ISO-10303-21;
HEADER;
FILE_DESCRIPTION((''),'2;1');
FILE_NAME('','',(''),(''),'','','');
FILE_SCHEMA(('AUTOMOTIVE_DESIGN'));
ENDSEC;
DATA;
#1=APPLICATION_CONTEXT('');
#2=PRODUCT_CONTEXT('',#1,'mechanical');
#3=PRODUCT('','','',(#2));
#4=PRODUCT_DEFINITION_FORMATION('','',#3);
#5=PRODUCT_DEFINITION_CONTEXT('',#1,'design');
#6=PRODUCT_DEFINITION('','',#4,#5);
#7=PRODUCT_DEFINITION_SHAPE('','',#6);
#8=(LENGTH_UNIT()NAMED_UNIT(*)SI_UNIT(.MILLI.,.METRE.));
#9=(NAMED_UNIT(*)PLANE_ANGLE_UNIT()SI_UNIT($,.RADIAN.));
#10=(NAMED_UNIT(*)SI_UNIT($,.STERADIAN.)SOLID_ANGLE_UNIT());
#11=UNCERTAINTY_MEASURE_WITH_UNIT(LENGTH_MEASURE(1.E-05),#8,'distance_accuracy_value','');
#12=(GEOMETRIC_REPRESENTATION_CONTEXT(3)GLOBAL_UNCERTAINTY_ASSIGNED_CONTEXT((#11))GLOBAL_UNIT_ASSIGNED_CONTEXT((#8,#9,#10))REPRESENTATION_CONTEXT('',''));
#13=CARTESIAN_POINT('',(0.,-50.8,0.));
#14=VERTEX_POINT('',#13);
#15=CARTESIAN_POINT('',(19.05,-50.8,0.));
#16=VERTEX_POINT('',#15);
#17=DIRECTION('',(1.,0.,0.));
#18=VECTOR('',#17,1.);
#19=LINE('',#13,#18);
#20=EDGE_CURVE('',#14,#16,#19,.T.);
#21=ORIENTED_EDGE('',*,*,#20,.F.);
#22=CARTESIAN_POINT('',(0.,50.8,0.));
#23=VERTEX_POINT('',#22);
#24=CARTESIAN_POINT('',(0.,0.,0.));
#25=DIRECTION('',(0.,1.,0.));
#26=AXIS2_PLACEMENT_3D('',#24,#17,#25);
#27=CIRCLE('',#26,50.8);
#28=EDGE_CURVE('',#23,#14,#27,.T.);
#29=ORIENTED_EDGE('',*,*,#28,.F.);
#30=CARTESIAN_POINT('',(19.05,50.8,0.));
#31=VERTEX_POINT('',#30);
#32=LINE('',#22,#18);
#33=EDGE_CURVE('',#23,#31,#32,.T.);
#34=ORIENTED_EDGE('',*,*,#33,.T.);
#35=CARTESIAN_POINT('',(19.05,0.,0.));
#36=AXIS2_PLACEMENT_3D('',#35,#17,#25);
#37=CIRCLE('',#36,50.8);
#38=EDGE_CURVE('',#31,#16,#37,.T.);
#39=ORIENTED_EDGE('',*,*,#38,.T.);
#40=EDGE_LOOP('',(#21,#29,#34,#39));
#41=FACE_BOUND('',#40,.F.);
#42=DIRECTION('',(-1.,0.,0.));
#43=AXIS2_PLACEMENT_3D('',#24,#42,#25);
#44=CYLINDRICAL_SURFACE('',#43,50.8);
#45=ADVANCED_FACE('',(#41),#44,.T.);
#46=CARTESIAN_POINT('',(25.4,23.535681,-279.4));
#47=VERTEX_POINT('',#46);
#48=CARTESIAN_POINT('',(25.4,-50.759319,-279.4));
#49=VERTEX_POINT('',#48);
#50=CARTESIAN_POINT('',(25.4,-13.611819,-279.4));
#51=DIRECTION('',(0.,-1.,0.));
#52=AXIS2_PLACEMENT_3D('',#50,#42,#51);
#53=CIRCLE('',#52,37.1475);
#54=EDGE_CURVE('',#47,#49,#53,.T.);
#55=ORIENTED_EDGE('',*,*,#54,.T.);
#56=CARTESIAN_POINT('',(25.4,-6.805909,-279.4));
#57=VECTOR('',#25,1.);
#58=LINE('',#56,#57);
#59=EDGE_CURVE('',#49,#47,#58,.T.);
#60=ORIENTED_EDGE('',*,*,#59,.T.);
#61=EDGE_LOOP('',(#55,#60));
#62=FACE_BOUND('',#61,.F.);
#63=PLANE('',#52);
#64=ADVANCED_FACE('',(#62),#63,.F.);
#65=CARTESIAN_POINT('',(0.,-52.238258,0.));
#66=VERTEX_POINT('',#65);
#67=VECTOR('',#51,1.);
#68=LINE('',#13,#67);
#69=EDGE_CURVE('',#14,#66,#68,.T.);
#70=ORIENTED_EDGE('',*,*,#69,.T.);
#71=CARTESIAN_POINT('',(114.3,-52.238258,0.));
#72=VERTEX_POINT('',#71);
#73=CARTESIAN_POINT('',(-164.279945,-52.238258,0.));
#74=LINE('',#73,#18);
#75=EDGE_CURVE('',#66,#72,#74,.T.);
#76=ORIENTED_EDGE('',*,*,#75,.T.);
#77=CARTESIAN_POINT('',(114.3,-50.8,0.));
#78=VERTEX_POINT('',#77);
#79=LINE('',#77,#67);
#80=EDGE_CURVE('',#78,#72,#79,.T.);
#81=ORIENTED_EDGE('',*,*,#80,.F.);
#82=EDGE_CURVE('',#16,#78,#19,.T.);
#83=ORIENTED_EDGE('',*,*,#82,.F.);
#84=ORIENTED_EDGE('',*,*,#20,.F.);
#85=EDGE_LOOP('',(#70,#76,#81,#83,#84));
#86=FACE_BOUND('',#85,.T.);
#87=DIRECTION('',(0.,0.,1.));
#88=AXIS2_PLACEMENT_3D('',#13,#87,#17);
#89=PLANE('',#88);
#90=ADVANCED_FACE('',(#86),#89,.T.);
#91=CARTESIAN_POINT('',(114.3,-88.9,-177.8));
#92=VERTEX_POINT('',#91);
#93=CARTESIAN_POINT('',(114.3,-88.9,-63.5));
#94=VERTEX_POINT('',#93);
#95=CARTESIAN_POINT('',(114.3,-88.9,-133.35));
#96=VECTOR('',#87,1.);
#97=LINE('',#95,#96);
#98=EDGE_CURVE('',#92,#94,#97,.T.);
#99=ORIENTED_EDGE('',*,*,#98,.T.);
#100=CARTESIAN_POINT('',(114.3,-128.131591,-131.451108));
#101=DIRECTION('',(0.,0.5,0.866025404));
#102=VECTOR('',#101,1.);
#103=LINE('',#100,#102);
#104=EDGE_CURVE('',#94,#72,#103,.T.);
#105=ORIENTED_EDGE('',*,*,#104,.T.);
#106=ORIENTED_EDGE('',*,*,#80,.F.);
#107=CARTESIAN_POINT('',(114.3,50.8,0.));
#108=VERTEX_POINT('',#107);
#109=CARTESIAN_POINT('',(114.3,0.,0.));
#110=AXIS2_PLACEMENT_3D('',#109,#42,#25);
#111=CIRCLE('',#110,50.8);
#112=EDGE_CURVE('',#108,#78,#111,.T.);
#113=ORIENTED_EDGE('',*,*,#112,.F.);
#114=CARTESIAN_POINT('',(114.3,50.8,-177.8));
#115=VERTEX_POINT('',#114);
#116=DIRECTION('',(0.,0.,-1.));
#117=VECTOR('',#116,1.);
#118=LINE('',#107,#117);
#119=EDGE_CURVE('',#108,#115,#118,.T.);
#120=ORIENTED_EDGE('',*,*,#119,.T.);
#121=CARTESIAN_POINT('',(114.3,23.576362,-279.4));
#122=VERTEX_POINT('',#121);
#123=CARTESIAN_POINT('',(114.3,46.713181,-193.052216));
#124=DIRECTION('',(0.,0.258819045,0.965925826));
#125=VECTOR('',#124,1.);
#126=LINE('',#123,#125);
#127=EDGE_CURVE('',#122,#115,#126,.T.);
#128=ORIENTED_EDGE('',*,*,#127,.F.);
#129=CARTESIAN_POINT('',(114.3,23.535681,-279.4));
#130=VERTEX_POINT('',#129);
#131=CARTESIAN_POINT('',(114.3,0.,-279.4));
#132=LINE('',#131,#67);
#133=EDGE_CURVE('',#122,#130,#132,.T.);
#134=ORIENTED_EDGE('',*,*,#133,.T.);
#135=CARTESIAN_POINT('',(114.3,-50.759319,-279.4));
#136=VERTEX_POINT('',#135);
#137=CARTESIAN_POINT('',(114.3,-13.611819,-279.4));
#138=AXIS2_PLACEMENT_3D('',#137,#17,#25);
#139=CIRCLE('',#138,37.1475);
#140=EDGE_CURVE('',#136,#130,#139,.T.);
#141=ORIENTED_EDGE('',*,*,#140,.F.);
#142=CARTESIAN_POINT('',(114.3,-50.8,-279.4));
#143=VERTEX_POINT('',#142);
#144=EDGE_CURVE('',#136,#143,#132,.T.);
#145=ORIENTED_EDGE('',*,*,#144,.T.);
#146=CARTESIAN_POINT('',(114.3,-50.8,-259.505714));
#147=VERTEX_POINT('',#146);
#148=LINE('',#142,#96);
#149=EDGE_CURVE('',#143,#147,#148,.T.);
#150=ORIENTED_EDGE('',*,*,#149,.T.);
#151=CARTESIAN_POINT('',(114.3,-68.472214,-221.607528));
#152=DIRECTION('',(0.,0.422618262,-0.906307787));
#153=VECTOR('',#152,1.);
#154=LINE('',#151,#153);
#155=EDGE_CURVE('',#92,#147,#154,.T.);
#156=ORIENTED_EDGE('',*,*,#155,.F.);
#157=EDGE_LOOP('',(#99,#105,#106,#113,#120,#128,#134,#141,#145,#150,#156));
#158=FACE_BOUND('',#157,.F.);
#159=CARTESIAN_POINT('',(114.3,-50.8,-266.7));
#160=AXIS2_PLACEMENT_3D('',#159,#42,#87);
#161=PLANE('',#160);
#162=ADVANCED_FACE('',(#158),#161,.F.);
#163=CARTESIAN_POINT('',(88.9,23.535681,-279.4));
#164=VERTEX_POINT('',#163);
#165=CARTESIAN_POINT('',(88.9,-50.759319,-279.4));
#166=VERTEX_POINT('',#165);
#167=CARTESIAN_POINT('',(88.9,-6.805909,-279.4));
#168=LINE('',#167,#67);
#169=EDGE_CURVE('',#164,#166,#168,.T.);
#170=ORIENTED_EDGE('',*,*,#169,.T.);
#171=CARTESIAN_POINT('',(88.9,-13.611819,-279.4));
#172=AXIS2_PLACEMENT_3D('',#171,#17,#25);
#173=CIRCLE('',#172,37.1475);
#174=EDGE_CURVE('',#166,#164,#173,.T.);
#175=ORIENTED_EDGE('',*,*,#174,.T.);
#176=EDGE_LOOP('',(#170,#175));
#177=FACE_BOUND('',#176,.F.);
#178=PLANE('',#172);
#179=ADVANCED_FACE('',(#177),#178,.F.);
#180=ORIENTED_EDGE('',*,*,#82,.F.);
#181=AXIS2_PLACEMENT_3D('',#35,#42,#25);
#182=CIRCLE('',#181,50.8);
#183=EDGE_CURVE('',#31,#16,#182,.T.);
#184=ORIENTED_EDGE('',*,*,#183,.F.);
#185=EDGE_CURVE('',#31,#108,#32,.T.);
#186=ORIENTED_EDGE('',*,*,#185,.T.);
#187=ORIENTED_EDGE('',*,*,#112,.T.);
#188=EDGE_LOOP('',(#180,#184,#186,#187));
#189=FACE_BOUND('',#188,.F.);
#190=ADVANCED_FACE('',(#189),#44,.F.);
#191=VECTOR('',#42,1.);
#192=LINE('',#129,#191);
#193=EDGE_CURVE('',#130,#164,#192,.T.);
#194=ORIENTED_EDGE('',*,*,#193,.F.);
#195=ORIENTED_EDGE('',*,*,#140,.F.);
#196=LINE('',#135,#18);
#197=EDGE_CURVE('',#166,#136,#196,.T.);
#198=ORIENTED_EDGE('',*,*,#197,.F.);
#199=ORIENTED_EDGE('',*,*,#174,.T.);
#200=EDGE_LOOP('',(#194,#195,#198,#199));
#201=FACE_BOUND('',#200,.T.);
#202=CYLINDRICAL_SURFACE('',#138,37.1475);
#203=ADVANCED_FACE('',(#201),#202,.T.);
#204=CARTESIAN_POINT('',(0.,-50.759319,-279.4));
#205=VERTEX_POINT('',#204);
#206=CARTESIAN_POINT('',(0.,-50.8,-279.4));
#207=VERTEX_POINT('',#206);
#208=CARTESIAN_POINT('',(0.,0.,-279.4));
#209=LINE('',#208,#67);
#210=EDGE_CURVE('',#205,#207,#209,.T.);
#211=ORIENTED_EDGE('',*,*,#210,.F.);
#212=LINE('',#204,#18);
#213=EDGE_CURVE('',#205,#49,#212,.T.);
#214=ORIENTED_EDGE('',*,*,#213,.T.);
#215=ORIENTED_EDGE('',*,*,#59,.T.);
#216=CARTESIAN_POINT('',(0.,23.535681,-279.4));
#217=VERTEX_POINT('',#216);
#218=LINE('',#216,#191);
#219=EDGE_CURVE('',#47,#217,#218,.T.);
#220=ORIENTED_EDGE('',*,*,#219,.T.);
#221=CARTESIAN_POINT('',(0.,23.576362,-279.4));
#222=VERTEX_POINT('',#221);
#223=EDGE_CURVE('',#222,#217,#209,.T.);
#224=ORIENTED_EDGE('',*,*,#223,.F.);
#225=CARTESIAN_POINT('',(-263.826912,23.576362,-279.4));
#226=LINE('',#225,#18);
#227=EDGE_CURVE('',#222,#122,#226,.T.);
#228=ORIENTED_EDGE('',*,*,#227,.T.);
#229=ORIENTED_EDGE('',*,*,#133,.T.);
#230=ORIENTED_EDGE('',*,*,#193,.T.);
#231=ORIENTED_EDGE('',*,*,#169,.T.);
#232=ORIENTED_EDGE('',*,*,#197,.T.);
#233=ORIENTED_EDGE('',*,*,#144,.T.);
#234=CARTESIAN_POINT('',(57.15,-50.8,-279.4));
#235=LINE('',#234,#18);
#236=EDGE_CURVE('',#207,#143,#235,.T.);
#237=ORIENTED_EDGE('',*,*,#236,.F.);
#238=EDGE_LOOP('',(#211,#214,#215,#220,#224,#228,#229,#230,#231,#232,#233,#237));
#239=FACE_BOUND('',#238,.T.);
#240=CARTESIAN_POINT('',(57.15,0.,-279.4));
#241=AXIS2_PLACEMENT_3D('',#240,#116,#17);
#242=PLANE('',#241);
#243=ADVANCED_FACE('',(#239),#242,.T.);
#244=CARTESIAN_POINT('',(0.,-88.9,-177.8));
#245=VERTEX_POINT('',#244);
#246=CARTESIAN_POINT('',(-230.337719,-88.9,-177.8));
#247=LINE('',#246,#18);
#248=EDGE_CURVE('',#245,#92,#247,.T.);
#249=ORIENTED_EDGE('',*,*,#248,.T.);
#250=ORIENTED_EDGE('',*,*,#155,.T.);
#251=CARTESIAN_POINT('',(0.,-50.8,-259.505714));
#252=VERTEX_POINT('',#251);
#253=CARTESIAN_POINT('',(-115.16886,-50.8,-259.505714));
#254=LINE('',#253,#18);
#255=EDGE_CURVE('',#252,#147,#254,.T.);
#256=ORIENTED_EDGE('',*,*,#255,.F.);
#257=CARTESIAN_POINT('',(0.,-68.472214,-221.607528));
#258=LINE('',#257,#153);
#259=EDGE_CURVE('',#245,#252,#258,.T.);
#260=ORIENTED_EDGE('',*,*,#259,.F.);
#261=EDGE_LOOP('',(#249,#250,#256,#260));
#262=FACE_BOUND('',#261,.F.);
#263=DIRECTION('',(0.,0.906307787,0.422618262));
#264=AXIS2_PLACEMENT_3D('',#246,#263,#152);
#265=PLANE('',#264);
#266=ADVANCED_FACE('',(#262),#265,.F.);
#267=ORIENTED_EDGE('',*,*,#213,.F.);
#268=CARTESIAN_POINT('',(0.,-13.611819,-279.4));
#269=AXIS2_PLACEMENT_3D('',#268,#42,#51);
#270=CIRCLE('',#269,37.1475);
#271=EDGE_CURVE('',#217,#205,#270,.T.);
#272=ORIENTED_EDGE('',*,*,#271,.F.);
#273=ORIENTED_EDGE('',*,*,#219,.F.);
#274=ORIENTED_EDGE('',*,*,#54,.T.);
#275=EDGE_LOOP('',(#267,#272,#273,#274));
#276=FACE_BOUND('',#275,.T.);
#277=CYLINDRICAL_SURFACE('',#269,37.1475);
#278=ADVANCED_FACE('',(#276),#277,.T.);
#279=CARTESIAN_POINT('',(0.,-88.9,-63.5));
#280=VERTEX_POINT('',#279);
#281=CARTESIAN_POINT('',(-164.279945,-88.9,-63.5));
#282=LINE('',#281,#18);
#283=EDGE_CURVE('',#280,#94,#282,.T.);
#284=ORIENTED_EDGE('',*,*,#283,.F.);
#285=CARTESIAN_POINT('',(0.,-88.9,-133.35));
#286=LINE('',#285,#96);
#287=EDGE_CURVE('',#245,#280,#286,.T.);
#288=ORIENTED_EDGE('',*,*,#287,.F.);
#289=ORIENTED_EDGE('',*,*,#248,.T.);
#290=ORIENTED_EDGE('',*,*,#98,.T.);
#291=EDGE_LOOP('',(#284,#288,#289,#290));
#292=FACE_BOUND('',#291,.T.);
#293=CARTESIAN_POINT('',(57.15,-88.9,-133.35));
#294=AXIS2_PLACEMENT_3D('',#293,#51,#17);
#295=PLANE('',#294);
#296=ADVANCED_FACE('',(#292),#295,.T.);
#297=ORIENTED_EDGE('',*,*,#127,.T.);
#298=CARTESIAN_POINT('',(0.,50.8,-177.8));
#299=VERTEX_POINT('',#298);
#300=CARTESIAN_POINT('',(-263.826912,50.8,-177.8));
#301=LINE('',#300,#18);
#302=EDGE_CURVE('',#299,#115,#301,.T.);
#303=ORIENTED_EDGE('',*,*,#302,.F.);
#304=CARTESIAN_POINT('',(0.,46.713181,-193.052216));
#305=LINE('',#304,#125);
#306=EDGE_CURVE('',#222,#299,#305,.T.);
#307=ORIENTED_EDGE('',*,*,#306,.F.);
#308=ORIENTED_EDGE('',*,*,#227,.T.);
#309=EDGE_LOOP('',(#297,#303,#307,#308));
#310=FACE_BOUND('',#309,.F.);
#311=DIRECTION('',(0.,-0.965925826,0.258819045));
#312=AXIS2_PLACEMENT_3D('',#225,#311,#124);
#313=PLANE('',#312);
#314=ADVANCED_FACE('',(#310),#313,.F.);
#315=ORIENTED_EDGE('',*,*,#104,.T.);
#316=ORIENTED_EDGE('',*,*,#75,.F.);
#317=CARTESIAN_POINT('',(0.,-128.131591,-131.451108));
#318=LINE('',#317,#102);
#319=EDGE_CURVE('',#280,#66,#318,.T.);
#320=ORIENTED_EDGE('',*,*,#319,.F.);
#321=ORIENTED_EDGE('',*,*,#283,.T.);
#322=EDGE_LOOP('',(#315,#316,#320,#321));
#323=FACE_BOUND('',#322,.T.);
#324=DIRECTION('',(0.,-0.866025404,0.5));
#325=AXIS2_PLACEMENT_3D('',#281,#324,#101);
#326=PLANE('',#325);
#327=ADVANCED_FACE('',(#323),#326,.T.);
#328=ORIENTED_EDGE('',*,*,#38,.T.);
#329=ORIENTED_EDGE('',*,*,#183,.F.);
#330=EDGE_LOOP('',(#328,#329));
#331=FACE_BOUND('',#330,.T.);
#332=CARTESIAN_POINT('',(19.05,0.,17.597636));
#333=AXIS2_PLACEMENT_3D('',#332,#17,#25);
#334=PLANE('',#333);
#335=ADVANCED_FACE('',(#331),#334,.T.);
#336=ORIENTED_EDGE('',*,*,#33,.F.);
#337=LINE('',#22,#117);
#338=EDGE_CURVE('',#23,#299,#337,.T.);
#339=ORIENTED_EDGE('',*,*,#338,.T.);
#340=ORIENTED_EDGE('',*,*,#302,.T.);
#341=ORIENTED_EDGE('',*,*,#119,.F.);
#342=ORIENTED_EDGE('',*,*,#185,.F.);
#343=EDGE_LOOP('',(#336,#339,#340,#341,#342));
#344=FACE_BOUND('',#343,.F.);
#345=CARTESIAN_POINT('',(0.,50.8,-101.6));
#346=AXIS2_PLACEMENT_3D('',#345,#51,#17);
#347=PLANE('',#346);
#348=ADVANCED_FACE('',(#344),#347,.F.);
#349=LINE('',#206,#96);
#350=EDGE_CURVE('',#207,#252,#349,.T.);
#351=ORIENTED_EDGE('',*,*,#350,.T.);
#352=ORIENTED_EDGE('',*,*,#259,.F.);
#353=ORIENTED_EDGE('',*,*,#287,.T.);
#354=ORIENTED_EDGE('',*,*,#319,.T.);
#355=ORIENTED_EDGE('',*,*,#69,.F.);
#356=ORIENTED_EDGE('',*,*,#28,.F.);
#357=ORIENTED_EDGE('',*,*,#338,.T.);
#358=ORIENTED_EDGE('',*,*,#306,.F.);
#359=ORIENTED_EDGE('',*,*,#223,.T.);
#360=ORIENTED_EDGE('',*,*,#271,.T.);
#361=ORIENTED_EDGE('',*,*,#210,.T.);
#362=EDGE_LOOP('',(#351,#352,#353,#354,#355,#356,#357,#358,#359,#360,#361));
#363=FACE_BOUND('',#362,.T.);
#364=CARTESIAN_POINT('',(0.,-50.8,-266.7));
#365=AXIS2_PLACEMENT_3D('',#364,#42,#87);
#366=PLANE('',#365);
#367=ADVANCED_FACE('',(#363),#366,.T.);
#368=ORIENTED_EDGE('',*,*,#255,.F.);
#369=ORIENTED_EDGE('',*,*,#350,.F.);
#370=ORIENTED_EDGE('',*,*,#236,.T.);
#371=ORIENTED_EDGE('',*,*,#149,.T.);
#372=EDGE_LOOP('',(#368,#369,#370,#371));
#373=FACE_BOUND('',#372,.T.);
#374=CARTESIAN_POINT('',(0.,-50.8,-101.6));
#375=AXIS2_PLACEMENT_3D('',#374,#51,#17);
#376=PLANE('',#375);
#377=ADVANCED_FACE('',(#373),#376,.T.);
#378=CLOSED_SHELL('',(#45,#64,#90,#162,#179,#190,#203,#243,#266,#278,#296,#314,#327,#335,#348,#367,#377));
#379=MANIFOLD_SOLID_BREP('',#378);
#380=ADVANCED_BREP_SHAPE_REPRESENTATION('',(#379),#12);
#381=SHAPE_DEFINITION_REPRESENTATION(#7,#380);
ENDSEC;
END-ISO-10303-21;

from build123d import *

# Parameters (mm, degrees)
F1_DEPTH     = 19.05
F2_DEPTH     = 114.3
F3_W         = 114.3
F3_H         = 101.6
F4_DEPTH     = 177.8
F5_T1_DEPTH  = 641.9538230647
F6_R         = 37.1475
F7_DEPTH     = 25.4
F8_R         = 37.1475
F9_DEPTH     = 25.4
F10_W        = 114.3
F10_H        = 266.7
F11_DEPTH    = 38.1
F12_T4_DEPTH = 574.9754388191
F13_T1_DEPTH = 442.85989084


# Not quite as in the source:
# - a fillet or chamfer that OpenCascade refuses, or shapes differently, is made with other operations: its cross-section is extruded or revolved along the edge and cut away or added


with BuildPart() as f1:
    # F0 (on Right) → F1 (new body)
    with BuildSketch(Plane.YZ):
        with BuildLine():
            Line((-50.8, 0), (50.8, 0))
            ThreePointArc((50.8, 0), (0, 50.8), (-50.8, 0))
        make_face()
        with BuildLine():
            Line((50.8, -101.6), (50.8, 0))
            ThreePointArc((50.8, 0), (0, -50.8), (-50.8, 0))
            Line((-50.8, 0), (-50.8, -101.6))
            Line((-50.8, -101.6), (50.8, -101.6))
        make_face()
        with BuildLine():
            ThreePointArc((-50.8, 0), (0, -50.8), (50.8, 0))
            Line((50.8, 0), (-50.8, 0))
        make_face()
    extrude(amount=F1_DEPTH)

    # F0 (on Right) → F2 (join)
    with BuildSketch(Plane.YZ):
        with BuildLine():
            Line((50.8, -101.6), (50.8, 0))
            ThreePointArc((50.8, 0), (0, -50.8), (-50.8, 0))
            Line((-50.8, 0), (-50.8, -101.6))
            Line((-50.8, -101.6), (50.8, -101.6))
        make_face()
    extrude(amount=F2_DEPTH)

    # F3 (on face) → F4 (join)
    with BuildSketch(Plane(origin=(0, 0, -101.6), x_dir=(1, 0, 0), z_dir=(0, 0, -1))):
        with Locations((57.15, 0)):
            Rectangle(F3_W, F3_H)
    extrude(amount=F4_DEPTH)

    # F5: chamfer of 101.6 x 27.223637951 on 1 edges, made by hand

    # F5_s2 → F5_t1 (cut)
    with BuildSketch(Plane.YZ.offset(-263.8269115324)):
        Polygon((23.576362049, -279.4), (50.8, -177.8), (50.8, -279.4), align=None)
    extrude(amount=F5_T1_DEPTH, mode=Mode.SUBTRACT)

    # F6 (on face) → F7 (join)
    with BuildSketch(Plane(origin=(0, 0, 0), x_dir=(0, -1, 0), z_dir=(-1, 0, 0))):
        with Locations((13.6118189755, -279.4)):
            Circle(F6_R)
    extrude(amount=-F7_DEPTH)

    # F8 (on face) → F9 (join)
    with BuildSketch(Plane.YZ.offset(114.3)):
        with Locations((-13.6118189755, -279.4)):
            Circle(F8_R)
    extrude(amount=-F9_DEPTH)

    # F10 (on face) → F11 (join)
    with BuildSketch(Plane.XZ.offset(50.8)):
        with Locations((57.15, -133.35)):
            Rectangle(F10_W, F10_H)
    extrude(amount=F11_DEPTH)

    # F12: chamfer of 88.9 x 41.45475081 on 1 edges, made by hand


with BuildPart() as f12_tool2:
    # F12_s3 → F12_t4 (new body)
    with BuildSketch(Plane.YZ.offset(-230.3377194096)):
        Polygon((-88.9, -177.8), (-47.44524919, -266.7), (-88.9, -266.7), align=None)
    extrude(amount=F12_T4_DEPTH)

    split(bisect_by=Plane.XZ.offset(50.8), keep=Keep.TOP)


with BuildPart() as f1_1:
    add(f1.part)

    # F12_t1: cut F12_tool2
    add(f12_tool2.part, mode=Mode.SUBTRACT)

    # F13: chamfer of 63.5 x 36.6617420935 on 1 edges, made by hand

    # F13_s2 → F13_t1 (cut)
    with BuildSketch(Plane.YZ.offset(-164.27994542)):
        Polygon((-88.9, -63.5), (-52.2382579065, 0), (-88.9, 0), align=None)
    extrude(amount=F13_T1_DEPTH, mode=Mode.SUBTRACT)


solid = f1_1.part
